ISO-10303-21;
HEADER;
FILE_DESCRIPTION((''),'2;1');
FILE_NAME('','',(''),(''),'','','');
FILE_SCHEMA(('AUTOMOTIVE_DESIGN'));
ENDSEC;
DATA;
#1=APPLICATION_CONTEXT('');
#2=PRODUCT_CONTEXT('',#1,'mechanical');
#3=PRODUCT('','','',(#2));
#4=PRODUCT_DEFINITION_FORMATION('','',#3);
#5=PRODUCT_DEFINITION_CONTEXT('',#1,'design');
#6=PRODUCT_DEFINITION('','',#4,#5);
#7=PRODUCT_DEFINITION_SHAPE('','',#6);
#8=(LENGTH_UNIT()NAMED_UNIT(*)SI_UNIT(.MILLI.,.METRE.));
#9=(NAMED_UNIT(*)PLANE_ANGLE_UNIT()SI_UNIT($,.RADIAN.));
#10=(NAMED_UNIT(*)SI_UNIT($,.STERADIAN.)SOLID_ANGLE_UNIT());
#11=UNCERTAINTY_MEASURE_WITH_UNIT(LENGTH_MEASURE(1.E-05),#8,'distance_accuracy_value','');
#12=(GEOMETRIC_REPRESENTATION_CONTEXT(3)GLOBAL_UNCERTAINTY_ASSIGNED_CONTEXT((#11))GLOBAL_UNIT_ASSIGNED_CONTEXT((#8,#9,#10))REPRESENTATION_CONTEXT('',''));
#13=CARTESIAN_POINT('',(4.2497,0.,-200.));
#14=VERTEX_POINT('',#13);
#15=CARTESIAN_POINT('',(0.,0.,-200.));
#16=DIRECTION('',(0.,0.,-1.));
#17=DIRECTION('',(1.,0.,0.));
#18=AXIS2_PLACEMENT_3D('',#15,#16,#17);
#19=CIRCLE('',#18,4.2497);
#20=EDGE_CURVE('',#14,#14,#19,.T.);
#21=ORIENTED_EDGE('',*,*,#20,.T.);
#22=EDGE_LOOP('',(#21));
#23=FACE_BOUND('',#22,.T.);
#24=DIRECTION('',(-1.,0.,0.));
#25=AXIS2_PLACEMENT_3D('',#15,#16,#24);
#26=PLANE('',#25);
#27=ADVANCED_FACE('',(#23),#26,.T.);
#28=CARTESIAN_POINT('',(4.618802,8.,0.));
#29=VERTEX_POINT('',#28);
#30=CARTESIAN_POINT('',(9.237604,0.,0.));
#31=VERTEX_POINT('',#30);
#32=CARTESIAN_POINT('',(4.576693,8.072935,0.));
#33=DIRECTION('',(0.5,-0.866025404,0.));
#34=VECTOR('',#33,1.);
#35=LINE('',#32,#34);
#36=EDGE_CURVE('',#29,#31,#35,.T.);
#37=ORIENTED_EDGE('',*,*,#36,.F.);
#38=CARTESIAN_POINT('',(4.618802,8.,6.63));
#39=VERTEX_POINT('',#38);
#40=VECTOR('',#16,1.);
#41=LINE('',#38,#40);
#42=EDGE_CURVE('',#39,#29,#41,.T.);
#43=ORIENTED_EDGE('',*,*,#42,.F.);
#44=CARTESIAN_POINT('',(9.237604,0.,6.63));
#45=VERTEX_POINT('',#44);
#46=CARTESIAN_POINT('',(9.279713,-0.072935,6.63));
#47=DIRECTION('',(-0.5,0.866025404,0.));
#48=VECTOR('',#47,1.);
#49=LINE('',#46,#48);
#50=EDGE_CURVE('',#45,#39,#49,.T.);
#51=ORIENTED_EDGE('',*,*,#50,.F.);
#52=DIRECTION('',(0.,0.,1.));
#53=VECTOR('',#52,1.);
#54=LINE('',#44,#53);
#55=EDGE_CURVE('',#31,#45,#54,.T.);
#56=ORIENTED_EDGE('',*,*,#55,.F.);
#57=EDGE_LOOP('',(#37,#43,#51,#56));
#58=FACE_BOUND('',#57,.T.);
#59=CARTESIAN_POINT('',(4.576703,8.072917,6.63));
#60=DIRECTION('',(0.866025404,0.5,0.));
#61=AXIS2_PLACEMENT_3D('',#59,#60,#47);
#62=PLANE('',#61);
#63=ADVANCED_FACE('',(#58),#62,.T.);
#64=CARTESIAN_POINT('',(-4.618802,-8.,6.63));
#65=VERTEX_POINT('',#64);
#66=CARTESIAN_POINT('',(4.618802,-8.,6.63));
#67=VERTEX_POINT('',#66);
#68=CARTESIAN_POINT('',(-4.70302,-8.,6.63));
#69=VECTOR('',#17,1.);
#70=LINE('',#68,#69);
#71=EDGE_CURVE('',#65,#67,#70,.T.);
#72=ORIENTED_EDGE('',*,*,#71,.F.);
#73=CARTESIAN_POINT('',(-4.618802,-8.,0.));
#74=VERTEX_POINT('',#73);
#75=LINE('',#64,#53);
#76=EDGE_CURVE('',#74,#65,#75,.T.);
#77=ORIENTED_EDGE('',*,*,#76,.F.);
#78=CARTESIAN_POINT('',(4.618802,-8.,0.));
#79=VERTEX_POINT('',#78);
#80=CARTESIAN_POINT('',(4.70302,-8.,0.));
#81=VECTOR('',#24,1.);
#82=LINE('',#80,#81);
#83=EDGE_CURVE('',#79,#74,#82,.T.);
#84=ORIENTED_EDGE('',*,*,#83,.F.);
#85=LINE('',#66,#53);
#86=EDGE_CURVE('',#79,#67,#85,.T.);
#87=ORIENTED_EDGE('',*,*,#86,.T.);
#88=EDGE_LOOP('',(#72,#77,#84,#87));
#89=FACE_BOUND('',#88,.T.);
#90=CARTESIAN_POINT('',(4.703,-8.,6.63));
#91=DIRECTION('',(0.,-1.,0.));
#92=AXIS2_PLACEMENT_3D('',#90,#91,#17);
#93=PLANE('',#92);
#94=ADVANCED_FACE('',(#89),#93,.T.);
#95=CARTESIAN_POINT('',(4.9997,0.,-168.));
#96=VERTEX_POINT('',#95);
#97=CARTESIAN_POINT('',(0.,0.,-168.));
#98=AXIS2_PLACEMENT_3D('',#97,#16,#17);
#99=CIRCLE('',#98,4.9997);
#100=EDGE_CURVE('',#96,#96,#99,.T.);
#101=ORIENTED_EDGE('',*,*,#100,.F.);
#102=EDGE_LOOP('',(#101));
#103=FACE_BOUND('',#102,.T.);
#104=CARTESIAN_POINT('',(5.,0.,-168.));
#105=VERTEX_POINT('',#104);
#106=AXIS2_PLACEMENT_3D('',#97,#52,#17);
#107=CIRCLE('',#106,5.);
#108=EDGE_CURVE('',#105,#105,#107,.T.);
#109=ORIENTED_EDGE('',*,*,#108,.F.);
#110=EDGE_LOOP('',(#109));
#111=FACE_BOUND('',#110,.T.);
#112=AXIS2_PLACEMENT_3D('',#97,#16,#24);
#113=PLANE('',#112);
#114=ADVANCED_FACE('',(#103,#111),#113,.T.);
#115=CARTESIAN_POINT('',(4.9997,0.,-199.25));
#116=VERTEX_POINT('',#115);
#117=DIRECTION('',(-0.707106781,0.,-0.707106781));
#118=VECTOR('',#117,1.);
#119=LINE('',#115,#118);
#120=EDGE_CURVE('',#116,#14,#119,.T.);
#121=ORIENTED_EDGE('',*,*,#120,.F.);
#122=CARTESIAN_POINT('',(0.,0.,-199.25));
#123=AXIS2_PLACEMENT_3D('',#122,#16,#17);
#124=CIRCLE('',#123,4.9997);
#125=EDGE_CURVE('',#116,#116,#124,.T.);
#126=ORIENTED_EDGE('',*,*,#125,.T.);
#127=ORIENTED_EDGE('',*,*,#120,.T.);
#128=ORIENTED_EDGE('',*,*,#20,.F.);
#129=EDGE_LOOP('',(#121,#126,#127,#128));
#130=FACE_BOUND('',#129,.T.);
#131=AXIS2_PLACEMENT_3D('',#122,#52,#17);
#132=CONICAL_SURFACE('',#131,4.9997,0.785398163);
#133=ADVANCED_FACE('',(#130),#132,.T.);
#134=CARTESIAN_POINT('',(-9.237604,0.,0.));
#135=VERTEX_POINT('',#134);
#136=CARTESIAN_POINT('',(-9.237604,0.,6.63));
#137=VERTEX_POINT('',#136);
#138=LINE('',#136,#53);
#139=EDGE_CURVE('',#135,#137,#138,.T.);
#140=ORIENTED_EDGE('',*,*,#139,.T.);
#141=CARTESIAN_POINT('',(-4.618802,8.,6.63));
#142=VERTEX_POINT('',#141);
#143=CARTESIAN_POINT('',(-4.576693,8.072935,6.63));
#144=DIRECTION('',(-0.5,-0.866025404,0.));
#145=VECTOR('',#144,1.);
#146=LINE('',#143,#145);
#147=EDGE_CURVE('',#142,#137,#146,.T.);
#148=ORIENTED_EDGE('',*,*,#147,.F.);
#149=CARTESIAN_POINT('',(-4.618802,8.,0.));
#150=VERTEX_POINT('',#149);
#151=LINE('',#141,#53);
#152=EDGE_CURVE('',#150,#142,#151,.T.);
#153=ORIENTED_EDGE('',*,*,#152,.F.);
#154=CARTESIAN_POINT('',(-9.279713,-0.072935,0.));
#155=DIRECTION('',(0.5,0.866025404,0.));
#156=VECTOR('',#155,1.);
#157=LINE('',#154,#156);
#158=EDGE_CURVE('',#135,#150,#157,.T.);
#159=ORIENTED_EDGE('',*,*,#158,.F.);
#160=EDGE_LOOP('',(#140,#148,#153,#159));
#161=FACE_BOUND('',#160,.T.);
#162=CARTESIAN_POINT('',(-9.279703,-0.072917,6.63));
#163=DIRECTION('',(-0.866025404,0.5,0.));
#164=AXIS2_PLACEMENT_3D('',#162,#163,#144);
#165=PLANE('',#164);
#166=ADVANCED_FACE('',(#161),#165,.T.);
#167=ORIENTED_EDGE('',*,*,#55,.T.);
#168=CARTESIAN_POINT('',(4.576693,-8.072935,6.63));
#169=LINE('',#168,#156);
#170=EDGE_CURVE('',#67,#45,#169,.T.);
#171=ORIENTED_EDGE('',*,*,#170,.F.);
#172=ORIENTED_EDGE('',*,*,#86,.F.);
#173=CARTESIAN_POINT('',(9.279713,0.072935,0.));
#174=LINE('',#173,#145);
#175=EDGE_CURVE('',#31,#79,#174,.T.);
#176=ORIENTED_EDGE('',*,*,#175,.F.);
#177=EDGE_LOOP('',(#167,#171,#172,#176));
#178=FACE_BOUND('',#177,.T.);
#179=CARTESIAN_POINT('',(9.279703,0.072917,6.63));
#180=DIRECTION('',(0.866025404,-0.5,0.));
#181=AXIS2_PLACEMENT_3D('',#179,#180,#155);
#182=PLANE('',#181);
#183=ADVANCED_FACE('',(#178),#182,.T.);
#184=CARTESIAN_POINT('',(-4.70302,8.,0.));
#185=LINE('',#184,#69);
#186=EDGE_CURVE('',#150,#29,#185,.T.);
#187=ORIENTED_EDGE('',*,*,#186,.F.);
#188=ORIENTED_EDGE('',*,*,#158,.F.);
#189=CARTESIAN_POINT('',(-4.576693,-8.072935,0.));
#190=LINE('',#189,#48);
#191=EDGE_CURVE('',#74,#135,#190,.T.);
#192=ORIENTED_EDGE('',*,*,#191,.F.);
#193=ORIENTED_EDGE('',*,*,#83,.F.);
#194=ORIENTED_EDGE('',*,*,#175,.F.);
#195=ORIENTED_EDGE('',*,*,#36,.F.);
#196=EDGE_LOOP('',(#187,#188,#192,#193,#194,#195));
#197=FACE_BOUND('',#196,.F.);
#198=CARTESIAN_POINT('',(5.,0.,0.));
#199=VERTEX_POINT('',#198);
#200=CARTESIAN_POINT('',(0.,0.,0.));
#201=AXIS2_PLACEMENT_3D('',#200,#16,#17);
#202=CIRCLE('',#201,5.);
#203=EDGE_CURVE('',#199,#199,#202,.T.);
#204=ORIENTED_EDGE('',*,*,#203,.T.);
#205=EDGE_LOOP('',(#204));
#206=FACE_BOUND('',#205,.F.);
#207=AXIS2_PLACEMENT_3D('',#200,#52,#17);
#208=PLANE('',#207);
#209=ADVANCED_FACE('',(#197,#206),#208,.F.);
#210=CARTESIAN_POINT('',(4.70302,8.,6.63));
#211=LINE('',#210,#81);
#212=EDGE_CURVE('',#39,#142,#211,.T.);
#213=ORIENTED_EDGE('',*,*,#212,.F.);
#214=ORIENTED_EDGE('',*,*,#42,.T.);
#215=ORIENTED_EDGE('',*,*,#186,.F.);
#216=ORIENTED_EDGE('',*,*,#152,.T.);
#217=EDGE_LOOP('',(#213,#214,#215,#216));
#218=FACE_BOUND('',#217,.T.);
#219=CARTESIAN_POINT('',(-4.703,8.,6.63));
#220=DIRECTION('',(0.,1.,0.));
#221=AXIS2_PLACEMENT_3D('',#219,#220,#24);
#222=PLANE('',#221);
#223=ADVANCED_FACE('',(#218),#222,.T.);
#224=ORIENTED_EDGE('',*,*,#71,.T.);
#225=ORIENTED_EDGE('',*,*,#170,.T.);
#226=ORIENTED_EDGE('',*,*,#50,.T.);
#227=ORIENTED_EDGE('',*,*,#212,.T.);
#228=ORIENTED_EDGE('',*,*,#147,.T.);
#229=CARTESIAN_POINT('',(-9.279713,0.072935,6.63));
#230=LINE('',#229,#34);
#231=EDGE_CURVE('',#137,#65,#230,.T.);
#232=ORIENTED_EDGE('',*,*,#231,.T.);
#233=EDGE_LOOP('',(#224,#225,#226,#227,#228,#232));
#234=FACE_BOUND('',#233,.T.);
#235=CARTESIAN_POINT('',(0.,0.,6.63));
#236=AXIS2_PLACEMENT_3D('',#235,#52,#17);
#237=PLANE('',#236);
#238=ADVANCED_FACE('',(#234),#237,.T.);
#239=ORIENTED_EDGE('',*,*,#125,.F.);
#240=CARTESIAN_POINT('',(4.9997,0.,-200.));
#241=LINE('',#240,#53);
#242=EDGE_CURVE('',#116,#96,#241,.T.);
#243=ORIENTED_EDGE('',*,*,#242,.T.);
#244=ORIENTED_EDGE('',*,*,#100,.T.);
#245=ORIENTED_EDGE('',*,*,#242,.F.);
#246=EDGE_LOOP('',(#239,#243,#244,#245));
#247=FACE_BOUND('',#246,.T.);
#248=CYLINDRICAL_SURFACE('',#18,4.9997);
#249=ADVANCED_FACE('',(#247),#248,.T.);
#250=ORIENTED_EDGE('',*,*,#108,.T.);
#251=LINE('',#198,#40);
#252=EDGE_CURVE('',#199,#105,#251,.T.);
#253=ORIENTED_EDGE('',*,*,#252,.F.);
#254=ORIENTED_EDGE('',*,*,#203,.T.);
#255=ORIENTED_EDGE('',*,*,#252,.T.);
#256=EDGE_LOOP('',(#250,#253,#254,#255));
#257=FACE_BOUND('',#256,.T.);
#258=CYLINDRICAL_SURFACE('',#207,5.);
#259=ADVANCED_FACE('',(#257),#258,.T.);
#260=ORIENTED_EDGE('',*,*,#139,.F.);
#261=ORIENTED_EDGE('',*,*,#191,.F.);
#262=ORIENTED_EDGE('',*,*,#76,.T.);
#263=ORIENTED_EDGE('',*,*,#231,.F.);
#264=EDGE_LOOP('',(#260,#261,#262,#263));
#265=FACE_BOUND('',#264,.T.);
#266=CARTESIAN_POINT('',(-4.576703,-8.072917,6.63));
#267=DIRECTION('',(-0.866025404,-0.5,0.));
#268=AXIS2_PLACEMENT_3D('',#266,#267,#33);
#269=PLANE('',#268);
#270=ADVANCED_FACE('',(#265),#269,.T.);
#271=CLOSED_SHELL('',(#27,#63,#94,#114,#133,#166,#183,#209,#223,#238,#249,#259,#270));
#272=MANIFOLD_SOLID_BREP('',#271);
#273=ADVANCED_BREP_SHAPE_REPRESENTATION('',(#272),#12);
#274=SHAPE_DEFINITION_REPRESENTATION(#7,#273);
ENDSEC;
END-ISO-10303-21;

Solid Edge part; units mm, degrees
sketch "Sketch1" plane through (0, 0, 0) normal (0, 0, 1) x (1, 0, 0)
  circle A0 centre (0, 0) radius 9.28
  dimension "D1" = 18.56
extrude "Protrusion1" add sketch "Sketch1" along normal blind 6.63
sketch "Sketch2" plane through (0, 0, 0) normal (0, 0, -1) x (1, 0, 0)
  circle A0 centre (0, 0) radius 5
extrude "Protrusion2" add sketch "Sketch2" along normal blind 200
sketch "Sketch3" plane through (0, 0, -200) normal (0, 0, -1) x (1, 0, 0)
  circle A0 centre (0, 0) radius 4.9997
extrude "Cutout1" cut sketch "Sketch3" against normal blind 32 flip side to cut
chamfer "Chamfer_1" distance 0.75 angle 45 1 edges at (-4.9997, 0, -200)
sketch "Sketch4" plane through (0, 0, 6.63) normal (0, 0, 1) x (1, 0, 0)
  line L0 (-4.703, 8) -> (4.703, 8)
  dimension "D1" = 16
extrude "Cutout2" cut sketch "Sketch4" against normal up to next material side at (0, 8.05, 6.63)
pattern_circular "Pattern1" count 6 over 360 about axis through (0, 0, 6.63) along (0, 0, 1) of "Cutout2"
properties part number "24104001"
